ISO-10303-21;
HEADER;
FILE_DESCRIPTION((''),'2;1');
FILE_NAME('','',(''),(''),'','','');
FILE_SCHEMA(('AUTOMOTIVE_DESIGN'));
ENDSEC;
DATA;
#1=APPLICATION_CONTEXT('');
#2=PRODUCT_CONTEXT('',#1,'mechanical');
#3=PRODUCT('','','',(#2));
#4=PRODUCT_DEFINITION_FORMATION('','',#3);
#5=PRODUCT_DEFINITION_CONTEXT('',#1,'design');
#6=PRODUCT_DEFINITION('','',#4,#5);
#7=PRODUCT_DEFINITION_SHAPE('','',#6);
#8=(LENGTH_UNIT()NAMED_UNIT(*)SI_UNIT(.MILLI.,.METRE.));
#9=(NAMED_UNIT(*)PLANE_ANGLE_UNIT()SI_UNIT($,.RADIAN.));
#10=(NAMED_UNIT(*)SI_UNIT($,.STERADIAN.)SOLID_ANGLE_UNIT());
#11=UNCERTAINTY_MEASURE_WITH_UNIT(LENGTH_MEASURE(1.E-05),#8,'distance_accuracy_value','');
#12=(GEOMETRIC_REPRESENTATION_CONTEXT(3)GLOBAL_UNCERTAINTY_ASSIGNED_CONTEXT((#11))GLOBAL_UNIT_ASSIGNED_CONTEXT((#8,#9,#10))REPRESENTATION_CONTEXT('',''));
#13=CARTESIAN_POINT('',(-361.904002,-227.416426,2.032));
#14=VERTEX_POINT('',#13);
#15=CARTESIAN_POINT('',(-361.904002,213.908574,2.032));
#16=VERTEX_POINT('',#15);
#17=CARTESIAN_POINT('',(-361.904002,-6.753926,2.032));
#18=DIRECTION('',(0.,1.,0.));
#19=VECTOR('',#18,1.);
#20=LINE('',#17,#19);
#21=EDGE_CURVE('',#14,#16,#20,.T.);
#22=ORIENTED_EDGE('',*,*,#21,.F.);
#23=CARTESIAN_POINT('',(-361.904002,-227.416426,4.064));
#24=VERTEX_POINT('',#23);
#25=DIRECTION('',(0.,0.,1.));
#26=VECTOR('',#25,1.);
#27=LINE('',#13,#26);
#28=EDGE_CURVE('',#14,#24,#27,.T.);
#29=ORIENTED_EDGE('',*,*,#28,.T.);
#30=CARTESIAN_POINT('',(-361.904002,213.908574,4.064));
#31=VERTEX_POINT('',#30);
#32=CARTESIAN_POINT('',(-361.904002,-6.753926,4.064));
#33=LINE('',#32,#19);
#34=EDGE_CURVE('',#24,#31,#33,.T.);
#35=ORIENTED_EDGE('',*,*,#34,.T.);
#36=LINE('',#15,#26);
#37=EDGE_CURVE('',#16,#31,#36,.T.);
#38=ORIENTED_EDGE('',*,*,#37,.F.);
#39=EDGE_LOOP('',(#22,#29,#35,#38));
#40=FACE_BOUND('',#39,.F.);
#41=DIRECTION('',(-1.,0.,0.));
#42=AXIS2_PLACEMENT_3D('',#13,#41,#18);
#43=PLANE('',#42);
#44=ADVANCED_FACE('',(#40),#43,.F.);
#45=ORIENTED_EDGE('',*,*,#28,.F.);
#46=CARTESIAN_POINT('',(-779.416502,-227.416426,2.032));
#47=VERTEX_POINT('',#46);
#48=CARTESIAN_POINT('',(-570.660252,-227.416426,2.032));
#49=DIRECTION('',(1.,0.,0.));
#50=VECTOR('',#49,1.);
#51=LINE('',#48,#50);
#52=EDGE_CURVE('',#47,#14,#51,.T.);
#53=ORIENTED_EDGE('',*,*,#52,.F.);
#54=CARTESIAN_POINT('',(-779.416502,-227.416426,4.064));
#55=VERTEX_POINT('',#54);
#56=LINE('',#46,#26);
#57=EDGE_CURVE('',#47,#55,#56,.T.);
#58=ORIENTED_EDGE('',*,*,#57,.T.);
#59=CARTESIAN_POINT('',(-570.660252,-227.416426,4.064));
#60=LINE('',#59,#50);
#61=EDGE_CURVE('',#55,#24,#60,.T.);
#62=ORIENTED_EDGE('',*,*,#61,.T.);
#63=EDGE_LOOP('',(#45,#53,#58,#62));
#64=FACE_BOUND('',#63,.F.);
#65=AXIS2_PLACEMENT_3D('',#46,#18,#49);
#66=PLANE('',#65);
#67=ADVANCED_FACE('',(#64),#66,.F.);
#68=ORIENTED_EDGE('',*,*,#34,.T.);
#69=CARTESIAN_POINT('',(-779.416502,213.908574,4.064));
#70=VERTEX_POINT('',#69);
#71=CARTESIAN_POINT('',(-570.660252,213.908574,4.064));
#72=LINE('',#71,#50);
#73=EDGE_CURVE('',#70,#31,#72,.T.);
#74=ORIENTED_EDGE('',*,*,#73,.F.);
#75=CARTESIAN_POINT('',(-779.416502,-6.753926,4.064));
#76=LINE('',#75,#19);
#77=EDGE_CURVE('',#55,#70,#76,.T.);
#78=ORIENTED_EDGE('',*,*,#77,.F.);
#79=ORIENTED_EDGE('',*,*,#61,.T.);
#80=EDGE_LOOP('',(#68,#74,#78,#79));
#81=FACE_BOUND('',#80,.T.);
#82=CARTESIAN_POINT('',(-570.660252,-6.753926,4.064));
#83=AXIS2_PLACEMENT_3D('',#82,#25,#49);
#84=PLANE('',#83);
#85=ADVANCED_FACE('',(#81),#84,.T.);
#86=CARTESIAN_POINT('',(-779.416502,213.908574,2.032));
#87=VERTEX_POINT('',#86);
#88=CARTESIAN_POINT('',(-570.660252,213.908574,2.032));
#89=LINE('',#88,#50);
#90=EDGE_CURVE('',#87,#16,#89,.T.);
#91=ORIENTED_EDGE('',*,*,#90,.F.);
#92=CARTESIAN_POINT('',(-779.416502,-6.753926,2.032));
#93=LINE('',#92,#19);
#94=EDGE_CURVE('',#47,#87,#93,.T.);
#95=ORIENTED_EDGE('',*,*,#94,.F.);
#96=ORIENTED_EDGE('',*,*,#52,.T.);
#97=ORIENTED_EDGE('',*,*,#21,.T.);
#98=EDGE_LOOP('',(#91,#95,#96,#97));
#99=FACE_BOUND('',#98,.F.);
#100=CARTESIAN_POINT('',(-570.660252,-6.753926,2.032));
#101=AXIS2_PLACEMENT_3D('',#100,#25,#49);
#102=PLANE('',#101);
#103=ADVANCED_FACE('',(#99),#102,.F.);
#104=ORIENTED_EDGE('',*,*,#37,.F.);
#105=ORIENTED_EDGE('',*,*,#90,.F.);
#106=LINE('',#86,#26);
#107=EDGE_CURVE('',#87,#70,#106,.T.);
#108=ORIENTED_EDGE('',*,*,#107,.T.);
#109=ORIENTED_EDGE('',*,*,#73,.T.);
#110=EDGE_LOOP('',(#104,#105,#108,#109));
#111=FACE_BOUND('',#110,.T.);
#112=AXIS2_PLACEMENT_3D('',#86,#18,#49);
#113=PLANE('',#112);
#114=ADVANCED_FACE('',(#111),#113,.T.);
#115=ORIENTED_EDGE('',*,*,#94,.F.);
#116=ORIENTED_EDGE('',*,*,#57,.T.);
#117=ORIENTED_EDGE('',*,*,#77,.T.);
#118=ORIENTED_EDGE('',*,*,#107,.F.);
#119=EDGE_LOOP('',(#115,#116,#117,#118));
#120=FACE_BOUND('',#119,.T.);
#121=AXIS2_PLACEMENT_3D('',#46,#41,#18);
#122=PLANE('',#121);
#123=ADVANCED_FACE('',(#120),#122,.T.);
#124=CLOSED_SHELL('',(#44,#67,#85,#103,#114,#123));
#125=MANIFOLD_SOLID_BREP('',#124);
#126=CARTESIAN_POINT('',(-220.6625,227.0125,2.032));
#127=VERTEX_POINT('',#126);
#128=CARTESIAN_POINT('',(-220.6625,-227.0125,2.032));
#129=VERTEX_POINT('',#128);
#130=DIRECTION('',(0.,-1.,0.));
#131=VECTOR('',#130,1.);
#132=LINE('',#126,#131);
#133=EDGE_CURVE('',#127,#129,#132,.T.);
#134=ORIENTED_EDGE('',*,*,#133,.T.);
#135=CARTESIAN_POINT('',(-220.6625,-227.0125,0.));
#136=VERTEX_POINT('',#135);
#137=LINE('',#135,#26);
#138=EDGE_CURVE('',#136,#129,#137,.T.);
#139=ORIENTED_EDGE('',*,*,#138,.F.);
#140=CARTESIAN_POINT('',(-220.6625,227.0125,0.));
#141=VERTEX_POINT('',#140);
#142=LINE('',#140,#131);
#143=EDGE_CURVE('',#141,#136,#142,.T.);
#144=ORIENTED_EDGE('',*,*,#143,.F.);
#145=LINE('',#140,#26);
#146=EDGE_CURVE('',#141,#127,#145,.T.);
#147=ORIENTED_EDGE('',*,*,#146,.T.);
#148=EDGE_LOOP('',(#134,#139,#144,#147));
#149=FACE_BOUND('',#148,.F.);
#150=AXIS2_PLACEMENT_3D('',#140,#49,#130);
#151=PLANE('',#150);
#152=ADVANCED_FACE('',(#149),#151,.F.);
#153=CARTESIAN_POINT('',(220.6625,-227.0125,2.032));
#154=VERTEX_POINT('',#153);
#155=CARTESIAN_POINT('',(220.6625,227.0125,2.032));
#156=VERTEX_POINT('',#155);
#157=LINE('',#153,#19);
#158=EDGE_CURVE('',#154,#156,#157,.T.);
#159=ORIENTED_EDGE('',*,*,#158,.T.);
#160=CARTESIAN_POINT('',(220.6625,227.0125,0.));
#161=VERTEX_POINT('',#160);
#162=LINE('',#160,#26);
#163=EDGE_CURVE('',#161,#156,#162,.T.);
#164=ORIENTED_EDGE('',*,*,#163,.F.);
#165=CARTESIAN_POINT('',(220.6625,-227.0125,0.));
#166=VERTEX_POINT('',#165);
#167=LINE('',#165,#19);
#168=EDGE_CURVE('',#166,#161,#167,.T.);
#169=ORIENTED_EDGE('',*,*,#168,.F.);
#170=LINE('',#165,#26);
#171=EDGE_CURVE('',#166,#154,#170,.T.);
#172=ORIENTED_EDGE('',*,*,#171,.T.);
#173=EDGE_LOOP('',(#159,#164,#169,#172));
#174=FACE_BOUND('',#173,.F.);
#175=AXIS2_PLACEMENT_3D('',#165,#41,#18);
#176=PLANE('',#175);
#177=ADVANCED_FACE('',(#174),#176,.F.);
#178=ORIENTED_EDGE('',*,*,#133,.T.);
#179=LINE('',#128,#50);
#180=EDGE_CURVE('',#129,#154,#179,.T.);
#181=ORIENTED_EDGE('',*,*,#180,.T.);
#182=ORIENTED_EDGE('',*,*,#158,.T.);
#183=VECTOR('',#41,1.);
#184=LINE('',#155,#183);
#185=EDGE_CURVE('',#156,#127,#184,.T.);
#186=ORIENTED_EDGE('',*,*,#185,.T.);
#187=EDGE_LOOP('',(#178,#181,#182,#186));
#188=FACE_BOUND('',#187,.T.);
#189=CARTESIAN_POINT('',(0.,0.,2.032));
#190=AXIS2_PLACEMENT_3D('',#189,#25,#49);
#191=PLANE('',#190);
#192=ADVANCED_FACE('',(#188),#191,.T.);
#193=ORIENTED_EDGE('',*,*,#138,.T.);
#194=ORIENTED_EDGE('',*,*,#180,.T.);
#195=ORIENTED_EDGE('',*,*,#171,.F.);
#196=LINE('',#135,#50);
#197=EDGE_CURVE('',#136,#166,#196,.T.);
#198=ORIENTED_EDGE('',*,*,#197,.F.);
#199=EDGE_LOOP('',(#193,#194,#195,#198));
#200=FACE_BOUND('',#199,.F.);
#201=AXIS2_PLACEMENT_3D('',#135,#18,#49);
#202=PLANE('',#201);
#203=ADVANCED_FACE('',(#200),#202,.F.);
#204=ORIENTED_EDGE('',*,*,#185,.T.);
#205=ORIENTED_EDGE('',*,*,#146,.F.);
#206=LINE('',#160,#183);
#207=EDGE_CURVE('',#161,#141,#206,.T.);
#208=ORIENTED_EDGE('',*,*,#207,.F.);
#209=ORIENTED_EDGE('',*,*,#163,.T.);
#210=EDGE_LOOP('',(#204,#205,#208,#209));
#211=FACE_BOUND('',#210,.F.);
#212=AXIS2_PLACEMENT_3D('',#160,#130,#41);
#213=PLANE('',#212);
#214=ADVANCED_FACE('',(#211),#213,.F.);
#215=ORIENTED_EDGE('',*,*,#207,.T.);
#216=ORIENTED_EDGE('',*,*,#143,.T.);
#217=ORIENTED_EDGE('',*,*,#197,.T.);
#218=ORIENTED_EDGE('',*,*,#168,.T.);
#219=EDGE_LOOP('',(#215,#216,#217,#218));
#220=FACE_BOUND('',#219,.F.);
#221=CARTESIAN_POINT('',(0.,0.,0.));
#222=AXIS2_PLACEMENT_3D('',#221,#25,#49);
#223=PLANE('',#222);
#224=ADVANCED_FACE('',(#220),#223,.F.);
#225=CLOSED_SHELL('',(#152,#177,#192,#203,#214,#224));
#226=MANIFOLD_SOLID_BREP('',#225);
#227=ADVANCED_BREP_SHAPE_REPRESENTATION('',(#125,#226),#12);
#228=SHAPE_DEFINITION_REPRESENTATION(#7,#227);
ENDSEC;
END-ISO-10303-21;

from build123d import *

# Parameters (mm, degrees)
F1_DEPTH = 2.032
F2_W     = 417.5125
F2_H     = 441.325
F3_DEPTH = 2.032


# Not quite as in the source:
# - a feature names something its author has since deleted; it is built from what else it names


with BuildPart() as f1:
    # F0 (on Top) → F1 (new body)
    with BuildSketch(Plane.XY):
        Polygon((217.4875, -227.0125), (220.6625, -227.0125), (220.6625, -144.4625), (220.6625, 227.0125), (-220.6625, 227.0125), (-220.6625, -144.4625), (-220.6625, -227.0125), (-217.4875, -227.0125), align=None)
    extrude(amount=F1_DEPTH)


with BuildPart() as f3:
    # F2 (on face) → F3 (new body)
    with BuildSketch(Plane.XY.offset(2.032)):
        with Locations((-570.6602515221, -6.7539259434)):
            Rectangle(F2_W, F2_H)
    extrude(amount=F3_DEPTH)


solid = Compound([f1.part, f3.part])
